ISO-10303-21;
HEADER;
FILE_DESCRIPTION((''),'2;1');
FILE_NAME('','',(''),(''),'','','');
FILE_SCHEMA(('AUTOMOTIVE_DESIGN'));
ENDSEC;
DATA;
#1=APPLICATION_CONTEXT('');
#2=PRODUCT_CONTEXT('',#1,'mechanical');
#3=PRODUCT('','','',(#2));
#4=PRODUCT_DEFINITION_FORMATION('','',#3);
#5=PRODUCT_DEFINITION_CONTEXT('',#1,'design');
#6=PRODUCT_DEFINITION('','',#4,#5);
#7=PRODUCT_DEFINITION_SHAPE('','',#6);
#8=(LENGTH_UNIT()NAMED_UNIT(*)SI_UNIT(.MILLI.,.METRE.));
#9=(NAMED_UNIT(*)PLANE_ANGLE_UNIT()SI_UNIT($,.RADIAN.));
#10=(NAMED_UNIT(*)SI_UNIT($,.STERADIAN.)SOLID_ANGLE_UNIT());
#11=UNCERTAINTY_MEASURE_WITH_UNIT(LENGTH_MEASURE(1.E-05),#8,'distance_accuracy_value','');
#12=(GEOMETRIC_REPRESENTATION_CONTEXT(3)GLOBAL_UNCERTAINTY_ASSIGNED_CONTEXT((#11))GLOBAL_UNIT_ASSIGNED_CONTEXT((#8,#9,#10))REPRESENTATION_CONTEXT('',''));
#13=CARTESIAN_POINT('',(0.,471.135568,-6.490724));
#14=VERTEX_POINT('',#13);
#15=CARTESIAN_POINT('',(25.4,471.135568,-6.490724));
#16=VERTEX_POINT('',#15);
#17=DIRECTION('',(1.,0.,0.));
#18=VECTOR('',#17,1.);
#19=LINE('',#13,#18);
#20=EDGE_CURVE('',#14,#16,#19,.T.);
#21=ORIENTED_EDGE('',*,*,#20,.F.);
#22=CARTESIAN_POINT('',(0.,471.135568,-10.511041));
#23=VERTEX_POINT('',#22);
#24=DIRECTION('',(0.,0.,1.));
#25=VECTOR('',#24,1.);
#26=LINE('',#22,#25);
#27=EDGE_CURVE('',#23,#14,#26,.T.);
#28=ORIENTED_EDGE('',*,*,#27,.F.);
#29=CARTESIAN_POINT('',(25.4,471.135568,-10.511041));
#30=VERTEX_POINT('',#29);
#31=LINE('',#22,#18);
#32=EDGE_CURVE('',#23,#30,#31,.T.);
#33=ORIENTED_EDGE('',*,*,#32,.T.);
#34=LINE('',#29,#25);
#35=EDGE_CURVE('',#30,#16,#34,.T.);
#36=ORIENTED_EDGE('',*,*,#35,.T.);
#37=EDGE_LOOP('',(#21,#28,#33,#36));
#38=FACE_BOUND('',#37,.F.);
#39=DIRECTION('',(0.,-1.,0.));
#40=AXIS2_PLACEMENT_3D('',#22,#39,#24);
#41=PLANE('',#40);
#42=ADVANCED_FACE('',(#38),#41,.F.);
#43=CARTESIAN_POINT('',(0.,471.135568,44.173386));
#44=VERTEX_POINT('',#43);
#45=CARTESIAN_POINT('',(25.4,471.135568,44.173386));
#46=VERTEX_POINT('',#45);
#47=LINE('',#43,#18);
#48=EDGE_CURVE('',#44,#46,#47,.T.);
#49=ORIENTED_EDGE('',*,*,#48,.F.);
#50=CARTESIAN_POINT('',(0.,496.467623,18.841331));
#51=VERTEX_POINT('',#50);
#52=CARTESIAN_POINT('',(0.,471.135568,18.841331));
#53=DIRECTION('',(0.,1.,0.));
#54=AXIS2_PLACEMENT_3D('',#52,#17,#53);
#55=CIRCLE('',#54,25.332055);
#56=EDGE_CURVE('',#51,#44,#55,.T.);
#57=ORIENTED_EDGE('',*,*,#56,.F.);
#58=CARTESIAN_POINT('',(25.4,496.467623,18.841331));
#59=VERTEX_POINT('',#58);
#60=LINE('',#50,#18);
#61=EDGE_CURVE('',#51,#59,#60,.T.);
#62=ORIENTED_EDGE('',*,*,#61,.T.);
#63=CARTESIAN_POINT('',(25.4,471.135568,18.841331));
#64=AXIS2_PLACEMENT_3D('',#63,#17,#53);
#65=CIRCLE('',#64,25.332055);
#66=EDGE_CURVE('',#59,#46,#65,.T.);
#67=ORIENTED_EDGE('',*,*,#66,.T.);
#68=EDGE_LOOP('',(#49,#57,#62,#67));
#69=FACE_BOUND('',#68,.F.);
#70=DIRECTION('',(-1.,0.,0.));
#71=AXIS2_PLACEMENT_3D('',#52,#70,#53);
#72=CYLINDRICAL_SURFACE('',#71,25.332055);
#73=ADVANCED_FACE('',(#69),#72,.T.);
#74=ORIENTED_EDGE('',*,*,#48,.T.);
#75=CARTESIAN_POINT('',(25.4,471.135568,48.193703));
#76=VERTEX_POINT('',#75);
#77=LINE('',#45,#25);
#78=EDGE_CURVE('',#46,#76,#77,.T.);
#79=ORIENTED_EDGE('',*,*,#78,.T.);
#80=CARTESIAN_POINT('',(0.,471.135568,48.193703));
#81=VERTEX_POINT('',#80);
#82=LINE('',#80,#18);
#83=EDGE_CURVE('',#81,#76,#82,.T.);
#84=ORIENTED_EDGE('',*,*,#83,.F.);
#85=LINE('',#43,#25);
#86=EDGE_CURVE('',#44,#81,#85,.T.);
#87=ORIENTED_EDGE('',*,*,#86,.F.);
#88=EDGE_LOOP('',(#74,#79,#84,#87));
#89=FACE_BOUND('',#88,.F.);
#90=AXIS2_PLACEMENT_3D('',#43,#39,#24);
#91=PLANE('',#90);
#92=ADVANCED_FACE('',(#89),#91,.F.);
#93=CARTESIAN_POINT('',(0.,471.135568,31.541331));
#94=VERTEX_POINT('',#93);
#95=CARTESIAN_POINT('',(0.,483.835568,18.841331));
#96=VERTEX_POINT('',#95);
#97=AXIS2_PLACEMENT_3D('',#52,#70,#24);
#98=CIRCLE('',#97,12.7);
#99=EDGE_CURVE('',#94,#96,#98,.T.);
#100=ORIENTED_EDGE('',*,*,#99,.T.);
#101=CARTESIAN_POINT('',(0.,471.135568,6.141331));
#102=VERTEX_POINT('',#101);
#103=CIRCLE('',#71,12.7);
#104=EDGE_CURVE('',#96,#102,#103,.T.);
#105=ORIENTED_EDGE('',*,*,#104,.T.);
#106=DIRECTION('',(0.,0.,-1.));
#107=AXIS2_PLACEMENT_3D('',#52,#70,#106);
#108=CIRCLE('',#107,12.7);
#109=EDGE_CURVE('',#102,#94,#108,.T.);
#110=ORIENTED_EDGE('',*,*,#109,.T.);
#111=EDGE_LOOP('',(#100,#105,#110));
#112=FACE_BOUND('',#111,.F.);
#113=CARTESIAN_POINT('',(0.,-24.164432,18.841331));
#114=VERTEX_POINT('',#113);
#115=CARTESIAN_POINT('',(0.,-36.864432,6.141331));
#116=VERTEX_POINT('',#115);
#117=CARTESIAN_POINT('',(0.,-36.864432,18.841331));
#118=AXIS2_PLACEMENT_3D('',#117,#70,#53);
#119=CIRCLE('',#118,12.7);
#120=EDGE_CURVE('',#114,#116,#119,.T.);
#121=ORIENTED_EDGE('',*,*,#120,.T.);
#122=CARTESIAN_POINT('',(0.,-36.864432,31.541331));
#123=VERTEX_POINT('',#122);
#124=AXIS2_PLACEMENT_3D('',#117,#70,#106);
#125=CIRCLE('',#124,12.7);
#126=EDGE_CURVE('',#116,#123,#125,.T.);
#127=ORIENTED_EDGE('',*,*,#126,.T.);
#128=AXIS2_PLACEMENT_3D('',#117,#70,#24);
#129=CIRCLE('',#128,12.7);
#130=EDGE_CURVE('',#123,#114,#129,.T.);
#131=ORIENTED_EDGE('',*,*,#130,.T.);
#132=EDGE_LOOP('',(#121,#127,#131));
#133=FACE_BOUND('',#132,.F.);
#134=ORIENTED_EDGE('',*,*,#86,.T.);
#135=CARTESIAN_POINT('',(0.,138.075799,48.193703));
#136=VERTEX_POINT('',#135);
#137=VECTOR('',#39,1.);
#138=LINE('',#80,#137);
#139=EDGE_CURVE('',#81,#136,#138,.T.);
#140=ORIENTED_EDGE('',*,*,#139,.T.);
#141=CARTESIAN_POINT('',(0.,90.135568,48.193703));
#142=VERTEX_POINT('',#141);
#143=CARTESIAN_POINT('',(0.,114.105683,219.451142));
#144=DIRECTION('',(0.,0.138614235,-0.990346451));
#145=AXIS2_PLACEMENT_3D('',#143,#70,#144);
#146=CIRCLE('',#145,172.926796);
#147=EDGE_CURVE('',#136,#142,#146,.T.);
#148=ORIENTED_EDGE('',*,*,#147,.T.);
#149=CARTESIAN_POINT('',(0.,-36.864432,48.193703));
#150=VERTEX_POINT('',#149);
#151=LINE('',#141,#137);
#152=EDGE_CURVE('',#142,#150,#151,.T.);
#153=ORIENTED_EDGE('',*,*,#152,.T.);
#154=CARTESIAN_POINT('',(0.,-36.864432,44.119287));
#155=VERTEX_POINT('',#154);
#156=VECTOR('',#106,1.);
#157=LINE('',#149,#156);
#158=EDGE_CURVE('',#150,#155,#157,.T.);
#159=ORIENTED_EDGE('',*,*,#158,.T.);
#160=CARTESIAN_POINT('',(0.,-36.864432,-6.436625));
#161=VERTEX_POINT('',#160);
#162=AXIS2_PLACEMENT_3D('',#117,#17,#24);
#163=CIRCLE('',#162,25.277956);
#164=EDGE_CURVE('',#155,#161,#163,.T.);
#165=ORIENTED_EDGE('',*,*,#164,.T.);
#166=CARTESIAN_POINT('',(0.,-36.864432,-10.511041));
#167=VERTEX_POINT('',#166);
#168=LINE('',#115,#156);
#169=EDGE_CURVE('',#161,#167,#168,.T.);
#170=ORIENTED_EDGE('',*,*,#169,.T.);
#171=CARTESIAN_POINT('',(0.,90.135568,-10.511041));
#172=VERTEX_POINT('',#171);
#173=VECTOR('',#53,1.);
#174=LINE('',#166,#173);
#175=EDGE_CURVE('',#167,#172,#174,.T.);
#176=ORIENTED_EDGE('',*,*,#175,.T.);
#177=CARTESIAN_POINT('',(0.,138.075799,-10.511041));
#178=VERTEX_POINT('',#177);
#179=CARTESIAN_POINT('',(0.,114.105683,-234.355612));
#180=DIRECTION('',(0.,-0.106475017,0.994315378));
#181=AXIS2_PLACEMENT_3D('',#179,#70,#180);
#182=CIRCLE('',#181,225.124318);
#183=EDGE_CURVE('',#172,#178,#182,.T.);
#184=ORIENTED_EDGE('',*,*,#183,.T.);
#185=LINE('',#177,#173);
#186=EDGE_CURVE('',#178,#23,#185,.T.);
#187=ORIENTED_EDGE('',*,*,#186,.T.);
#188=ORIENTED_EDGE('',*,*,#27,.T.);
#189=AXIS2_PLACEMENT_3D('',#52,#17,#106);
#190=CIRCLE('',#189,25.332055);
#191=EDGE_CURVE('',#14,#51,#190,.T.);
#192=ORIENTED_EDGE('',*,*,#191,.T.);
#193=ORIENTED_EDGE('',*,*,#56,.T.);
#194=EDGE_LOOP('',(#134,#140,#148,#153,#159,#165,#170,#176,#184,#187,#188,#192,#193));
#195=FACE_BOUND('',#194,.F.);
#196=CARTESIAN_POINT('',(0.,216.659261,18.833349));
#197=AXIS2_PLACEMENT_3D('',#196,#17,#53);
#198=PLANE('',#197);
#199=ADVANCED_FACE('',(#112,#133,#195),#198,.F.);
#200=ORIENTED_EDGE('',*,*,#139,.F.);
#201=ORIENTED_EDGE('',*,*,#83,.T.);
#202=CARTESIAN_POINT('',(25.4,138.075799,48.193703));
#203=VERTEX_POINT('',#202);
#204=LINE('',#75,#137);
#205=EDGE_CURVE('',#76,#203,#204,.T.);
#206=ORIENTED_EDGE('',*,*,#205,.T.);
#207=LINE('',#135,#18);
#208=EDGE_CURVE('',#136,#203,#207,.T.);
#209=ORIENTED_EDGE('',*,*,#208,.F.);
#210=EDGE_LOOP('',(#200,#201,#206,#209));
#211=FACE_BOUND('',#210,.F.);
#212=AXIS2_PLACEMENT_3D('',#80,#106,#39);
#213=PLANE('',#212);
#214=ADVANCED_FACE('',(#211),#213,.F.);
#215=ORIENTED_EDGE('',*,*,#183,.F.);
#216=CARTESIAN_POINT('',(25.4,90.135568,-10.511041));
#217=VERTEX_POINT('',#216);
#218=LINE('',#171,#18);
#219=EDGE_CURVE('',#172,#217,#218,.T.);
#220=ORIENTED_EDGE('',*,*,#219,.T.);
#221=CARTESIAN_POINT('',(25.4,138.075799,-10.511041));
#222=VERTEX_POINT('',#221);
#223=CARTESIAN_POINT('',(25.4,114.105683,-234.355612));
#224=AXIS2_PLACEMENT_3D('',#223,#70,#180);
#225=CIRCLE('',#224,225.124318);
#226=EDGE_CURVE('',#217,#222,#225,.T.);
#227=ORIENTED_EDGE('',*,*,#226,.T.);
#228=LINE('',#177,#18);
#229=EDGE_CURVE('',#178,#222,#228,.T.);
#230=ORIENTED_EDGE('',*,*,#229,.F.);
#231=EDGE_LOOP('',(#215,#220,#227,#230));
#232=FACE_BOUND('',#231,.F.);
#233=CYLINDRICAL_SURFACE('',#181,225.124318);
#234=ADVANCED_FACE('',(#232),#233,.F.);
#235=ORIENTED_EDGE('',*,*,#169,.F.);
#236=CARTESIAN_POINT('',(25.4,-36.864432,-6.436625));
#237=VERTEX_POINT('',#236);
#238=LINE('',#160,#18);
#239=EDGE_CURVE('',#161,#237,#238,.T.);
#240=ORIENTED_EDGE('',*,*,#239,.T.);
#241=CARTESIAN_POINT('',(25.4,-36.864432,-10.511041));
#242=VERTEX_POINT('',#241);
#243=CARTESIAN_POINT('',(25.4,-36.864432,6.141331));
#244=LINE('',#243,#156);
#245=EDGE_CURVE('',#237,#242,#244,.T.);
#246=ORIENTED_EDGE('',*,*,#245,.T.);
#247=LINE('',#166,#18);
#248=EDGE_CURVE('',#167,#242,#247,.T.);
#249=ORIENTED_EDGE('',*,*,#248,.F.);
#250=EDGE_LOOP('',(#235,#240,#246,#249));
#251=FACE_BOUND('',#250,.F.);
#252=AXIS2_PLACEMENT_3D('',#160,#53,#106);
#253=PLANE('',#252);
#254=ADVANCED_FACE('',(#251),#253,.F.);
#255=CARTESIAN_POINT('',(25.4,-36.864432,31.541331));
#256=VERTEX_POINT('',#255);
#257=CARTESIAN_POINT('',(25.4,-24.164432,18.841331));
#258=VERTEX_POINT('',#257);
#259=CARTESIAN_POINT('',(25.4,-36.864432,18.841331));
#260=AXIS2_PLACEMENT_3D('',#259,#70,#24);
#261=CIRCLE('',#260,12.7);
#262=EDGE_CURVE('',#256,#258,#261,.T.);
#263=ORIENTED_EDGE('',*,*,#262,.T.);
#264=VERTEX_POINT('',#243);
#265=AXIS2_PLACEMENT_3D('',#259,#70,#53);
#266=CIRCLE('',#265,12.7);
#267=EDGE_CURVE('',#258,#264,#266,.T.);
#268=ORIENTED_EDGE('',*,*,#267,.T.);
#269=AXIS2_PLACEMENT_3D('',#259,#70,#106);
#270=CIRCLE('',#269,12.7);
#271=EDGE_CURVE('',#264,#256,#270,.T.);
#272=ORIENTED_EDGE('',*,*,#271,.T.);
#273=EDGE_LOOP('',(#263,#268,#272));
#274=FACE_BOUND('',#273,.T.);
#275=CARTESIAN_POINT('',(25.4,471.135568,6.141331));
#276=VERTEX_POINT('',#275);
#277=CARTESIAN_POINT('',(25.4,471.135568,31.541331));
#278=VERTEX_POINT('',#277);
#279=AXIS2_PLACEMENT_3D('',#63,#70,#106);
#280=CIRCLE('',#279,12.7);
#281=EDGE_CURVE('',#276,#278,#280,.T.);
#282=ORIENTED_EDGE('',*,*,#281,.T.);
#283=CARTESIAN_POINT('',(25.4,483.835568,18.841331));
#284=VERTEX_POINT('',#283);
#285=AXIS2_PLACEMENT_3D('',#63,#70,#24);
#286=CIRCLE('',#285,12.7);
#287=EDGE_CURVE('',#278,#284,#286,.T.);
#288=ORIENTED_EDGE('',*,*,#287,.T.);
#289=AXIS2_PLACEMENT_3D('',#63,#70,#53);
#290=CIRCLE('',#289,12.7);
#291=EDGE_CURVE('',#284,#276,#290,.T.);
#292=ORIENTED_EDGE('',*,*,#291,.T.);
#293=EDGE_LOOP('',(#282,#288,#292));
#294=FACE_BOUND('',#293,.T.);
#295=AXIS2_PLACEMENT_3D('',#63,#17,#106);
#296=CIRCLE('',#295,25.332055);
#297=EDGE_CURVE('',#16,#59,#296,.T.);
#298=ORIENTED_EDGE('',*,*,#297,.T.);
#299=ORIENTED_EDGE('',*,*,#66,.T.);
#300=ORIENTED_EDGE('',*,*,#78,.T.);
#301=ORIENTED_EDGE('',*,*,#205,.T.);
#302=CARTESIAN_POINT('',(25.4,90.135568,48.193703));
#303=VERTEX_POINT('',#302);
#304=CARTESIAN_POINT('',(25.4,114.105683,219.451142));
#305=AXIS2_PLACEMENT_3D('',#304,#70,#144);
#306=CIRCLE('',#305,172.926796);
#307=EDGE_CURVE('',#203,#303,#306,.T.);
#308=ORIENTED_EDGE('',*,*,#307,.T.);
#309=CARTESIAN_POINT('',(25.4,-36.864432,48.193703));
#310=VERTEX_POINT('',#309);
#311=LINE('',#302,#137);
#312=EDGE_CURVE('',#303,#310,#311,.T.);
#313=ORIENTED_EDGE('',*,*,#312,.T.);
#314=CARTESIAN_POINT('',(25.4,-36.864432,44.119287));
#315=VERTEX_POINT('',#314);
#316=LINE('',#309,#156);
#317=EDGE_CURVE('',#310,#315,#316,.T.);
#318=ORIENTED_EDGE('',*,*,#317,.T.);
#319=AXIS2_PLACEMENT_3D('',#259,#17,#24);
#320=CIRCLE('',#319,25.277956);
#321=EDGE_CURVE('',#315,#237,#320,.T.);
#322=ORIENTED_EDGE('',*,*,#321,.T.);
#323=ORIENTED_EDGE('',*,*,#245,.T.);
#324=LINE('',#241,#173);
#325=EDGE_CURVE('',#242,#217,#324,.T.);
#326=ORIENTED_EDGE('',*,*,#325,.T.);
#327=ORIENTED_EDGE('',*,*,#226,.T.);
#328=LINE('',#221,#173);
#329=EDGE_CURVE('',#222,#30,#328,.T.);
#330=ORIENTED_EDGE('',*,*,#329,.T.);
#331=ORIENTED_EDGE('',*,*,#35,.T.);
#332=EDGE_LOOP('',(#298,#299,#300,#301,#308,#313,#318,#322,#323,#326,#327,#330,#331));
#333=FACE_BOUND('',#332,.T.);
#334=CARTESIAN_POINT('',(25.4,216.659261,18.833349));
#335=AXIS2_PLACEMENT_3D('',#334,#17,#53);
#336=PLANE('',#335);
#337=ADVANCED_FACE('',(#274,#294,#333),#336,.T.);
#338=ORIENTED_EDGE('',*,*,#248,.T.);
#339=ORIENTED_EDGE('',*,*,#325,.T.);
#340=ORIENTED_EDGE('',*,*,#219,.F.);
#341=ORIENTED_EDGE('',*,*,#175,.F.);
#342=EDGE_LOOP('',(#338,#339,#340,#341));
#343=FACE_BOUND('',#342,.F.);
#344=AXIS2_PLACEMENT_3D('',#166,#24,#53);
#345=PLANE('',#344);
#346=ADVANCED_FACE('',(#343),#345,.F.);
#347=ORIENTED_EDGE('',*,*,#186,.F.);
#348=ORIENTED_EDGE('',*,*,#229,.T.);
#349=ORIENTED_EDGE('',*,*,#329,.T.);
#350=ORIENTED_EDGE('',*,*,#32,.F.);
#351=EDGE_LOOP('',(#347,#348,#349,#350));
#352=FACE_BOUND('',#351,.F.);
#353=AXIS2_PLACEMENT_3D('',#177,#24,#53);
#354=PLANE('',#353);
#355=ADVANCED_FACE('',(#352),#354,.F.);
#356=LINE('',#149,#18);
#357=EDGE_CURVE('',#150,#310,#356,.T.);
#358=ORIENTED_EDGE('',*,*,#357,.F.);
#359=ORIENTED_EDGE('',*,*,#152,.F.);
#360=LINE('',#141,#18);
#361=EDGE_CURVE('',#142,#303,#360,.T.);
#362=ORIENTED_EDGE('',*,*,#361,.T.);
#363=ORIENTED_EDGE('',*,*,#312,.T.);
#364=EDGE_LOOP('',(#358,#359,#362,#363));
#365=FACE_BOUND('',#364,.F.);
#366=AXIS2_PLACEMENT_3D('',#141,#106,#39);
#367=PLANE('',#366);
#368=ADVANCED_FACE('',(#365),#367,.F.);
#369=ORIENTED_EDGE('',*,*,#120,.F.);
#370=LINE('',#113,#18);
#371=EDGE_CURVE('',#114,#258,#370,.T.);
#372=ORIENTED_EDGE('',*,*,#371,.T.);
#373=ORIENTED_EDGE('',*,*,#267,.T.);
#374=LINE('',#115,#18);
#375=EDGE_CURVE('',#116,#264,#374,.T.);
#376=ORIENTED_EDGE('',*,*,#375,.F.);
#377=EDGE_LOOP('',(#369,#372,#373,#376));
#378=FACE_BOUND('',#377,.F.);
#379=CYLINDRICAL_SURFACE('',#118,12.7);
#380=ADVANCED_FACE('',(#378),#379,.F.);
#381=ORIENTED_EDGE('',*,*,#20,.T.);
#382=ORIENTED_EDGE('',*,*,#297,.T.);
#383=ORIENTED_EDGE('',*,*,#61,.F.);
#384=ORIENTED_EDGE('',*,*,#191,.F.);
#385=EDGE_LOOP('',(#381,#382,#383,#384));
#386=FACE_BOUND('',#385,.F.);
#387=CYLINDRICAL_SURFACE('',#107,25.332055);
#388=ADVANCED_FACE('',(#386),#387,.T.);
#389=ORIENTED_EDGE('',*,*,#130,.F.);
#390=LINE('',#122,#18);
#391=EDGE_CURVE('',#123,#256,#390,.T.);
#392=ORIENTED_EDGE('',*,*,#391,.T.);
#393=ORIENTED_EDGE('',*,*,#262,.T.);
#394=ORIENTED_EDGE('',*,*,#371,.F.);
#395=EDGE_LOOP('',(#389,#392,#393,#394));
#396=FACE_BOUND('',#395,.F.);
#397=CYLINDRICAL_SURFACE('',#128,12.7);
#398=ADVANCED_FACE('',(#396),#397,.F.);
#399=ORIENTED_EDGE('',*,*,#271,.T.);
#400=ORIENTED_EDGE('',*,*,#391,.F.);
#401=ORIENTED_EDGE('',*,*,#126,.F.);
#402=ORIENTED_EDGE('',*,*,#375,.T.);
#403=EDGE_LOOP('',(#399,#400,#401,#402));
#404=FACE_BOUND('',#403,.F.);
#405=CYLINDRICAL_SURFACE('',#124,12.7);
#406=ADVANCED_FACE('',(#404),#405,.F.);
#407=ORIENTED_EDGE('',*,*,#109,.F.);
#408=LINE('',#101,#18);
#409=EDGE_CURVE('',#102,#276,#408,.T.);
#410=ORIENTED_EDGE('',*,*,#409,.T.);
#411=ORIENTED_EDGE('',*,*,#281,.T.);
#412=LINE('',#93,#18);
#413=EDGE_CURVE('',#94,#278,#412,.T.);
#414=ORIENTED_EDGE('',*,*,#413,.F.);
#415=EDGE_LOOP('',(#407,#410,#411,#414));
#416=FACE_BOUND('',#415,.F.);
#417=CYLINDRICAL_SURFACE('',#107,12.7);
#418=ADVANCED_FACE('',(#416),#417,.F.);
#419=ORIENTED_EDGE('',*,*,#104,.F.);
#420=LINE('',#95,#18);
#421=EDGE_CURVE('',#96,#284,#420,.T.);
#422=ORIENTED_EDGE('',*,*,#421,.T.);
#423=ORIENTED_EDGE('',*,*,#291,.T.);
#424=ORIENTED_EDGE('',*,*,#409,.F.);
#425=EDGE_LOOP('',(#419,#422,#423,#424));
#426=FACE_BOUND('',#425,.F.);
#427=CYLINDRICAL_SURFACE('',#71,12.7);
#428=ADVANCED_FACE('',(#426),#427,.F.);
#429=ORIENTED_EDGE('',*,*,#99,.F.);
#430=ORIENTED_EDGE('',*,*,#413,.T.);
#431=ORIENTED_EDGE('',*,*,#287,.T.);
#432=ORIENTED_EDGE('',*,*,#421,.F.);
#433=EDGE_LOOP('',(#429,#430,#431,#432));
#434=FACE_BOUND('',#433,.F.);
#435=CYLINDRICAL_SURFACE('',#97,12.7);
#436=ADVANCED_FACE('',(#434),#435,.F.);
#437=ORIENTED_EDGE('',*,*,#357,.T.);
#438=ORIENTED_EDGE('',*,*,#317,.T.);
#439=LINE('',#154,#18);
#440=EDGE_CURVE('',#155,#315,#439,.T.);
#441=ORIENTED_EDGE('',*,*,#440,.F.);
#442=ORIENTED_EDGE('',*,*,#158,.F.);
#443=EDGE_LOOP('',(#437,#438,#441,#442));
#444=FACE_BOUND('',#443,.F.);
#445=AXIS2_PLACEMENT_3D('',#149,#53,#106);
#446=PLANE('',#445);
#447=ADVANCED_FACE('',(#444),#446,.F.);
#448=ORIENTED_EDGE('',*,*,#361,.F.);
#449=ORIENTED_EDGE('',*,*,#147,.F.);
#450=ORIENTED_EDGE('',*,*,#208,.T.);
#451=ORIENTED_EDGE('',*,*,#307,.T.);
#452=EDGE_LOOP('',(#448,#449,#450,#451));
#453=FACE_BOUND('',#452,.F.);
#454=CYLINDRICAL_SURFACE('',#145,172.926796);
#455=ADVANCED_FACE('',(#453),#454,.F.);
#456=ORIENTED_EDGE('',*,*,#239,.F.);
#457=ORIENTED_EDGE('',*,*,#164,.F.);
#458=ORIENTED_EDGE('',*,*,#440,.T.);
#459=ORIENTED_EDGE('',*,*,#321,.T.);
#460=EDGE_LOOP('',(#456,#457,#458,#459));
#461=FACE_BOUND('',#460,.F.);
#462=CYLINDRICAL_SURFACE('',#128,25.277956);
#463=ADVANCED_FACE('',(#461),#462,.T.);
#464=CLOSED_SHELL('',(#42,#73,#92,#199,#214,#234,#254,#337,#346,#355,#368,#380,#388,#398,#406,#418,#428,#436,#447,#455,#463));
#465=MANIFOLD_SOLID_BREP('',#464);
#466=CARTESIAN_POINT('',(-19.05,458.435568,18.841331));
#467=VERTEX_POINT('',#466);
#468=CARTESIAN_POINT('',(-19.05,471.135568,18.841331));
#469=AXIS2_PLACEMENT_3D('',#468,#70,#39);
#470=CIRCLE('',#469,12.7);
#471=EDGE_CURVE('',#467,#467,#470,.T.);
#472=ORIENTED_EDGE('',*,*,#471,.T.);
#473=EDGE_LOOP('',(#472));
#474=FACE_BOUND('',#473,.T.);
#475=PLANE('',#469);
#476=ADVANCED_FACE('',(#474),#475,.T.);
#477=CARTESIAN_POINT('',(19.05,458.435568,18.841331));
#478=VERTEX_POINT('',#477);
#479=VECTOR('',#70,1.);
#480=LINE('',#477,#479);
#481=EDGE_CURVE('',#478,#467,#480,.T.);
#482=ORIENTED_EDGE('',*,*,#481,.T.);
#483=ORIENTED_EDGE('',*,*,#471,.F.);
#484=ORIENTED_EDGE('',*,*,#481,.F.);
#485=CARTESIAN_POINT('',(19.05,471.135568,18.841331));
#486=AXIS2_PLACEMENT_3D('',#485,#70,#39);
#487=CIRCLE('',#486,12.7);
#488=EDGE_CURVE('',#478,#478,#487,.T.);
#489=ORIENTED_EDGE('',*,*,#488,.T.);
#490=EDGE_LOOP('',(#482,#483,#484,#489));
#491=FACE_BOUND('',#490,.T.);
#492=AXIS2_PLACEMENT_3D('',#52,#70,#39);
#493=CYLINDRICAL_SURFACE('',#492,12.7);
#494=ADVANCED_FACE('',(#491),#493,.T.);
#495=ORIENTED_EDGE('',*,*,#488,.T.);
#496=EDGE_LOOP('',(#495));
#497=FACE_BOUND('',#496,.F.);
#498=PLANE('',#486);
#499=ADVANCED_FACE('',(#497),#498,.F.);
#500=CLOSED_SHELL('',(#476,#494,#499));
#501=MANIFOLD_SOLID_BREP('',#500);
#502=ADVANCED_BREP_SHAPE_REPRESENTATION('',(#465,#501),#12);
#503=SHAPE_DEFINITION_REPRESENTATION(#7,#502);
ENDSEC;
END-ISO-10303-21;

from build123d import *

# Parameters (mm, degrees)
F1_DEPTH = 25.4
F2_R     = 12.7
F3_DEPTH = 19.05


with BuildPart() as f1:
    # F0 (on Right) → F1 (new body)
    with BuildSketch(Plane.YZ):
        with BuildLine():
            Line((90.1355675816, 48.1937031183), (-36.8644324184, 48.1937031183))
            Line((-36.8644324184, 48.1937031183), (-36.8644324184, 44.1192870285))
            ThreePointArc((-36.8644324184, 44.1192870285), (-18.9902183288, 36.7155451359), (-11.5864764361, 18.8413310463))
            ThreePointArc((-11.5864764361, 18.8413310463), (-18.9902183288, 0.9671169568), (-36.8644324184, -6.4366249359))
            Line((-36.8644324184, -6.4366249359), (-36.8644324184, -10.5110410257))
            Line((-36.8644324184, -10.5110410257), (90.1355675816, -10.5110410257))
            ThreePointArc((90.1355675816, -10.5110410257), (114.1056831658, -9.2312943557), (138.0757987499, -10.5110410257))
            Line((138.0757987499, -10.5110410257), (471.1355675816, -10.5110410257))
            Line((471.1355675816, -10.5110410257), (471.1355675816, -6.490723888))
            ThreePointArc((471.1355675816, -6.490723888), (445.8035126474, 18.8413310463), (471.1355675816, 44.1733859806))
            Line((471.1355675816, 44.1733859806), (471.1355675816, 48.1937031183))
            Line((471.1355675816, 48.1937031183), (138.0757987499, 48.1937031183))
            ThreePointArc((138.0757987499, 48.1937031183), (114.1056831658, 46.5243458888), (90.1355675816, 48.1937031183))
        make_face()
        with BuildLine():
            ThreePointArc((-11.5864764361, 18.8413310463), (-18.9902183288, 36.7155451359), (-36.8644324184, 44.1192870285))
            Line((-36.8644324184, 44.1192870285), (-36.8644324184, 31.5413310463))
            ThreePointArc((-36.8644324184, 31.5413310463), (-27.8841762973, 27.8215871674), (-24.1644324184, 18.8413310463))
            ThreePointArc((-24.1644324184, 18.8413310463), (-27.8841762973, 9.8610749252), (-36.8644324184, 6.1413310463))
            Line((-36.8644324184, 6.1413310463), (-36.8644324184, -6.4366249359))
            ThreePointArc((-36.8644324184, -6.4366249359), (-18.9902183288, 0.9671169568), (-11.5864764361, 18.8413310463))
        make_face()
        with BuildLine():
            Line((-36.8644324184, 31.5413310463), (-36.8644324184, 44.1192870285))
            ThreePointArc((-36.8644324184, 44.1192870285), (-62.1423884006, 18.8413310463), (-36.8644324184, -6.4366249359))
            Line((-36.8644324184, -6.4366249359), (-36.8644324184, 6.1413310463))
            ThreePointArc((-36.8644324184, 6.1413310463), (-49.5644324184, 18.8413310463), (-36.8644324184, 31.5413310463))
        make_face()
        with BuildLine():
            ThreePointArc((496.4676225159, 18.8413310463), (489.0480354071, 36.7537988717), (471.1355675816, 44.1733859806))
            Line((471.1355675816, 44.1733859806), (471.1355675816, 31.5413310463))
            ThreePointArc((471.1355675816, 31.5413310463), (480.1158237027, 27.8215871674), (483.8355675816, 18.8413310463))
            ThreePointArc((483.8355675816, 18.8413310463), (480.1158237027, 9.8610749252), (471.1355675816, 6.1413310463))
            Line((471.1355675816, 6.1413310463), (471.1355675816, -6.490723888))
            ThreePointArc((471.1355675816, -6.490723888), (489.0480354071, 0.9288632209), (496.4676225159, 18.8413310463))
        make_face()
        with BuildLine():
            Line((471.1355675816, 31.5413310463), (471.1355675816, 44.1733859806))
            ThreePointArc((471.1355675816, 44.1733859806), (445.8035126474, 18.8413310463), (471.1355675816, -6.490723888))
            Line((471.1355675816, -6.490723888), (471.1355675816, 6.1413310463))
            ThreePointArc((471.1355675816, 6.1413310463), (458.4355675816, 18.8413310463), (471.1355675816, 31.5413310463))
        make_face()
    extrude(amount=F1_DEPTH)


with BuildPart() as f3:
    # F2 (on face) → F3 (new body, symmetric)
    with BuildSketch(Plane(origin=(0, 0, 0), x_dir=(0, -1, 0), z_dir=(-1, 0, 0))):
        with Locations((-471.1355675816, 18.8413310463)):
            Circle(F2_R)
    extrude(amount=F3_DEPTH, both=True)


solid = Compound([f1.part, f3.part])
